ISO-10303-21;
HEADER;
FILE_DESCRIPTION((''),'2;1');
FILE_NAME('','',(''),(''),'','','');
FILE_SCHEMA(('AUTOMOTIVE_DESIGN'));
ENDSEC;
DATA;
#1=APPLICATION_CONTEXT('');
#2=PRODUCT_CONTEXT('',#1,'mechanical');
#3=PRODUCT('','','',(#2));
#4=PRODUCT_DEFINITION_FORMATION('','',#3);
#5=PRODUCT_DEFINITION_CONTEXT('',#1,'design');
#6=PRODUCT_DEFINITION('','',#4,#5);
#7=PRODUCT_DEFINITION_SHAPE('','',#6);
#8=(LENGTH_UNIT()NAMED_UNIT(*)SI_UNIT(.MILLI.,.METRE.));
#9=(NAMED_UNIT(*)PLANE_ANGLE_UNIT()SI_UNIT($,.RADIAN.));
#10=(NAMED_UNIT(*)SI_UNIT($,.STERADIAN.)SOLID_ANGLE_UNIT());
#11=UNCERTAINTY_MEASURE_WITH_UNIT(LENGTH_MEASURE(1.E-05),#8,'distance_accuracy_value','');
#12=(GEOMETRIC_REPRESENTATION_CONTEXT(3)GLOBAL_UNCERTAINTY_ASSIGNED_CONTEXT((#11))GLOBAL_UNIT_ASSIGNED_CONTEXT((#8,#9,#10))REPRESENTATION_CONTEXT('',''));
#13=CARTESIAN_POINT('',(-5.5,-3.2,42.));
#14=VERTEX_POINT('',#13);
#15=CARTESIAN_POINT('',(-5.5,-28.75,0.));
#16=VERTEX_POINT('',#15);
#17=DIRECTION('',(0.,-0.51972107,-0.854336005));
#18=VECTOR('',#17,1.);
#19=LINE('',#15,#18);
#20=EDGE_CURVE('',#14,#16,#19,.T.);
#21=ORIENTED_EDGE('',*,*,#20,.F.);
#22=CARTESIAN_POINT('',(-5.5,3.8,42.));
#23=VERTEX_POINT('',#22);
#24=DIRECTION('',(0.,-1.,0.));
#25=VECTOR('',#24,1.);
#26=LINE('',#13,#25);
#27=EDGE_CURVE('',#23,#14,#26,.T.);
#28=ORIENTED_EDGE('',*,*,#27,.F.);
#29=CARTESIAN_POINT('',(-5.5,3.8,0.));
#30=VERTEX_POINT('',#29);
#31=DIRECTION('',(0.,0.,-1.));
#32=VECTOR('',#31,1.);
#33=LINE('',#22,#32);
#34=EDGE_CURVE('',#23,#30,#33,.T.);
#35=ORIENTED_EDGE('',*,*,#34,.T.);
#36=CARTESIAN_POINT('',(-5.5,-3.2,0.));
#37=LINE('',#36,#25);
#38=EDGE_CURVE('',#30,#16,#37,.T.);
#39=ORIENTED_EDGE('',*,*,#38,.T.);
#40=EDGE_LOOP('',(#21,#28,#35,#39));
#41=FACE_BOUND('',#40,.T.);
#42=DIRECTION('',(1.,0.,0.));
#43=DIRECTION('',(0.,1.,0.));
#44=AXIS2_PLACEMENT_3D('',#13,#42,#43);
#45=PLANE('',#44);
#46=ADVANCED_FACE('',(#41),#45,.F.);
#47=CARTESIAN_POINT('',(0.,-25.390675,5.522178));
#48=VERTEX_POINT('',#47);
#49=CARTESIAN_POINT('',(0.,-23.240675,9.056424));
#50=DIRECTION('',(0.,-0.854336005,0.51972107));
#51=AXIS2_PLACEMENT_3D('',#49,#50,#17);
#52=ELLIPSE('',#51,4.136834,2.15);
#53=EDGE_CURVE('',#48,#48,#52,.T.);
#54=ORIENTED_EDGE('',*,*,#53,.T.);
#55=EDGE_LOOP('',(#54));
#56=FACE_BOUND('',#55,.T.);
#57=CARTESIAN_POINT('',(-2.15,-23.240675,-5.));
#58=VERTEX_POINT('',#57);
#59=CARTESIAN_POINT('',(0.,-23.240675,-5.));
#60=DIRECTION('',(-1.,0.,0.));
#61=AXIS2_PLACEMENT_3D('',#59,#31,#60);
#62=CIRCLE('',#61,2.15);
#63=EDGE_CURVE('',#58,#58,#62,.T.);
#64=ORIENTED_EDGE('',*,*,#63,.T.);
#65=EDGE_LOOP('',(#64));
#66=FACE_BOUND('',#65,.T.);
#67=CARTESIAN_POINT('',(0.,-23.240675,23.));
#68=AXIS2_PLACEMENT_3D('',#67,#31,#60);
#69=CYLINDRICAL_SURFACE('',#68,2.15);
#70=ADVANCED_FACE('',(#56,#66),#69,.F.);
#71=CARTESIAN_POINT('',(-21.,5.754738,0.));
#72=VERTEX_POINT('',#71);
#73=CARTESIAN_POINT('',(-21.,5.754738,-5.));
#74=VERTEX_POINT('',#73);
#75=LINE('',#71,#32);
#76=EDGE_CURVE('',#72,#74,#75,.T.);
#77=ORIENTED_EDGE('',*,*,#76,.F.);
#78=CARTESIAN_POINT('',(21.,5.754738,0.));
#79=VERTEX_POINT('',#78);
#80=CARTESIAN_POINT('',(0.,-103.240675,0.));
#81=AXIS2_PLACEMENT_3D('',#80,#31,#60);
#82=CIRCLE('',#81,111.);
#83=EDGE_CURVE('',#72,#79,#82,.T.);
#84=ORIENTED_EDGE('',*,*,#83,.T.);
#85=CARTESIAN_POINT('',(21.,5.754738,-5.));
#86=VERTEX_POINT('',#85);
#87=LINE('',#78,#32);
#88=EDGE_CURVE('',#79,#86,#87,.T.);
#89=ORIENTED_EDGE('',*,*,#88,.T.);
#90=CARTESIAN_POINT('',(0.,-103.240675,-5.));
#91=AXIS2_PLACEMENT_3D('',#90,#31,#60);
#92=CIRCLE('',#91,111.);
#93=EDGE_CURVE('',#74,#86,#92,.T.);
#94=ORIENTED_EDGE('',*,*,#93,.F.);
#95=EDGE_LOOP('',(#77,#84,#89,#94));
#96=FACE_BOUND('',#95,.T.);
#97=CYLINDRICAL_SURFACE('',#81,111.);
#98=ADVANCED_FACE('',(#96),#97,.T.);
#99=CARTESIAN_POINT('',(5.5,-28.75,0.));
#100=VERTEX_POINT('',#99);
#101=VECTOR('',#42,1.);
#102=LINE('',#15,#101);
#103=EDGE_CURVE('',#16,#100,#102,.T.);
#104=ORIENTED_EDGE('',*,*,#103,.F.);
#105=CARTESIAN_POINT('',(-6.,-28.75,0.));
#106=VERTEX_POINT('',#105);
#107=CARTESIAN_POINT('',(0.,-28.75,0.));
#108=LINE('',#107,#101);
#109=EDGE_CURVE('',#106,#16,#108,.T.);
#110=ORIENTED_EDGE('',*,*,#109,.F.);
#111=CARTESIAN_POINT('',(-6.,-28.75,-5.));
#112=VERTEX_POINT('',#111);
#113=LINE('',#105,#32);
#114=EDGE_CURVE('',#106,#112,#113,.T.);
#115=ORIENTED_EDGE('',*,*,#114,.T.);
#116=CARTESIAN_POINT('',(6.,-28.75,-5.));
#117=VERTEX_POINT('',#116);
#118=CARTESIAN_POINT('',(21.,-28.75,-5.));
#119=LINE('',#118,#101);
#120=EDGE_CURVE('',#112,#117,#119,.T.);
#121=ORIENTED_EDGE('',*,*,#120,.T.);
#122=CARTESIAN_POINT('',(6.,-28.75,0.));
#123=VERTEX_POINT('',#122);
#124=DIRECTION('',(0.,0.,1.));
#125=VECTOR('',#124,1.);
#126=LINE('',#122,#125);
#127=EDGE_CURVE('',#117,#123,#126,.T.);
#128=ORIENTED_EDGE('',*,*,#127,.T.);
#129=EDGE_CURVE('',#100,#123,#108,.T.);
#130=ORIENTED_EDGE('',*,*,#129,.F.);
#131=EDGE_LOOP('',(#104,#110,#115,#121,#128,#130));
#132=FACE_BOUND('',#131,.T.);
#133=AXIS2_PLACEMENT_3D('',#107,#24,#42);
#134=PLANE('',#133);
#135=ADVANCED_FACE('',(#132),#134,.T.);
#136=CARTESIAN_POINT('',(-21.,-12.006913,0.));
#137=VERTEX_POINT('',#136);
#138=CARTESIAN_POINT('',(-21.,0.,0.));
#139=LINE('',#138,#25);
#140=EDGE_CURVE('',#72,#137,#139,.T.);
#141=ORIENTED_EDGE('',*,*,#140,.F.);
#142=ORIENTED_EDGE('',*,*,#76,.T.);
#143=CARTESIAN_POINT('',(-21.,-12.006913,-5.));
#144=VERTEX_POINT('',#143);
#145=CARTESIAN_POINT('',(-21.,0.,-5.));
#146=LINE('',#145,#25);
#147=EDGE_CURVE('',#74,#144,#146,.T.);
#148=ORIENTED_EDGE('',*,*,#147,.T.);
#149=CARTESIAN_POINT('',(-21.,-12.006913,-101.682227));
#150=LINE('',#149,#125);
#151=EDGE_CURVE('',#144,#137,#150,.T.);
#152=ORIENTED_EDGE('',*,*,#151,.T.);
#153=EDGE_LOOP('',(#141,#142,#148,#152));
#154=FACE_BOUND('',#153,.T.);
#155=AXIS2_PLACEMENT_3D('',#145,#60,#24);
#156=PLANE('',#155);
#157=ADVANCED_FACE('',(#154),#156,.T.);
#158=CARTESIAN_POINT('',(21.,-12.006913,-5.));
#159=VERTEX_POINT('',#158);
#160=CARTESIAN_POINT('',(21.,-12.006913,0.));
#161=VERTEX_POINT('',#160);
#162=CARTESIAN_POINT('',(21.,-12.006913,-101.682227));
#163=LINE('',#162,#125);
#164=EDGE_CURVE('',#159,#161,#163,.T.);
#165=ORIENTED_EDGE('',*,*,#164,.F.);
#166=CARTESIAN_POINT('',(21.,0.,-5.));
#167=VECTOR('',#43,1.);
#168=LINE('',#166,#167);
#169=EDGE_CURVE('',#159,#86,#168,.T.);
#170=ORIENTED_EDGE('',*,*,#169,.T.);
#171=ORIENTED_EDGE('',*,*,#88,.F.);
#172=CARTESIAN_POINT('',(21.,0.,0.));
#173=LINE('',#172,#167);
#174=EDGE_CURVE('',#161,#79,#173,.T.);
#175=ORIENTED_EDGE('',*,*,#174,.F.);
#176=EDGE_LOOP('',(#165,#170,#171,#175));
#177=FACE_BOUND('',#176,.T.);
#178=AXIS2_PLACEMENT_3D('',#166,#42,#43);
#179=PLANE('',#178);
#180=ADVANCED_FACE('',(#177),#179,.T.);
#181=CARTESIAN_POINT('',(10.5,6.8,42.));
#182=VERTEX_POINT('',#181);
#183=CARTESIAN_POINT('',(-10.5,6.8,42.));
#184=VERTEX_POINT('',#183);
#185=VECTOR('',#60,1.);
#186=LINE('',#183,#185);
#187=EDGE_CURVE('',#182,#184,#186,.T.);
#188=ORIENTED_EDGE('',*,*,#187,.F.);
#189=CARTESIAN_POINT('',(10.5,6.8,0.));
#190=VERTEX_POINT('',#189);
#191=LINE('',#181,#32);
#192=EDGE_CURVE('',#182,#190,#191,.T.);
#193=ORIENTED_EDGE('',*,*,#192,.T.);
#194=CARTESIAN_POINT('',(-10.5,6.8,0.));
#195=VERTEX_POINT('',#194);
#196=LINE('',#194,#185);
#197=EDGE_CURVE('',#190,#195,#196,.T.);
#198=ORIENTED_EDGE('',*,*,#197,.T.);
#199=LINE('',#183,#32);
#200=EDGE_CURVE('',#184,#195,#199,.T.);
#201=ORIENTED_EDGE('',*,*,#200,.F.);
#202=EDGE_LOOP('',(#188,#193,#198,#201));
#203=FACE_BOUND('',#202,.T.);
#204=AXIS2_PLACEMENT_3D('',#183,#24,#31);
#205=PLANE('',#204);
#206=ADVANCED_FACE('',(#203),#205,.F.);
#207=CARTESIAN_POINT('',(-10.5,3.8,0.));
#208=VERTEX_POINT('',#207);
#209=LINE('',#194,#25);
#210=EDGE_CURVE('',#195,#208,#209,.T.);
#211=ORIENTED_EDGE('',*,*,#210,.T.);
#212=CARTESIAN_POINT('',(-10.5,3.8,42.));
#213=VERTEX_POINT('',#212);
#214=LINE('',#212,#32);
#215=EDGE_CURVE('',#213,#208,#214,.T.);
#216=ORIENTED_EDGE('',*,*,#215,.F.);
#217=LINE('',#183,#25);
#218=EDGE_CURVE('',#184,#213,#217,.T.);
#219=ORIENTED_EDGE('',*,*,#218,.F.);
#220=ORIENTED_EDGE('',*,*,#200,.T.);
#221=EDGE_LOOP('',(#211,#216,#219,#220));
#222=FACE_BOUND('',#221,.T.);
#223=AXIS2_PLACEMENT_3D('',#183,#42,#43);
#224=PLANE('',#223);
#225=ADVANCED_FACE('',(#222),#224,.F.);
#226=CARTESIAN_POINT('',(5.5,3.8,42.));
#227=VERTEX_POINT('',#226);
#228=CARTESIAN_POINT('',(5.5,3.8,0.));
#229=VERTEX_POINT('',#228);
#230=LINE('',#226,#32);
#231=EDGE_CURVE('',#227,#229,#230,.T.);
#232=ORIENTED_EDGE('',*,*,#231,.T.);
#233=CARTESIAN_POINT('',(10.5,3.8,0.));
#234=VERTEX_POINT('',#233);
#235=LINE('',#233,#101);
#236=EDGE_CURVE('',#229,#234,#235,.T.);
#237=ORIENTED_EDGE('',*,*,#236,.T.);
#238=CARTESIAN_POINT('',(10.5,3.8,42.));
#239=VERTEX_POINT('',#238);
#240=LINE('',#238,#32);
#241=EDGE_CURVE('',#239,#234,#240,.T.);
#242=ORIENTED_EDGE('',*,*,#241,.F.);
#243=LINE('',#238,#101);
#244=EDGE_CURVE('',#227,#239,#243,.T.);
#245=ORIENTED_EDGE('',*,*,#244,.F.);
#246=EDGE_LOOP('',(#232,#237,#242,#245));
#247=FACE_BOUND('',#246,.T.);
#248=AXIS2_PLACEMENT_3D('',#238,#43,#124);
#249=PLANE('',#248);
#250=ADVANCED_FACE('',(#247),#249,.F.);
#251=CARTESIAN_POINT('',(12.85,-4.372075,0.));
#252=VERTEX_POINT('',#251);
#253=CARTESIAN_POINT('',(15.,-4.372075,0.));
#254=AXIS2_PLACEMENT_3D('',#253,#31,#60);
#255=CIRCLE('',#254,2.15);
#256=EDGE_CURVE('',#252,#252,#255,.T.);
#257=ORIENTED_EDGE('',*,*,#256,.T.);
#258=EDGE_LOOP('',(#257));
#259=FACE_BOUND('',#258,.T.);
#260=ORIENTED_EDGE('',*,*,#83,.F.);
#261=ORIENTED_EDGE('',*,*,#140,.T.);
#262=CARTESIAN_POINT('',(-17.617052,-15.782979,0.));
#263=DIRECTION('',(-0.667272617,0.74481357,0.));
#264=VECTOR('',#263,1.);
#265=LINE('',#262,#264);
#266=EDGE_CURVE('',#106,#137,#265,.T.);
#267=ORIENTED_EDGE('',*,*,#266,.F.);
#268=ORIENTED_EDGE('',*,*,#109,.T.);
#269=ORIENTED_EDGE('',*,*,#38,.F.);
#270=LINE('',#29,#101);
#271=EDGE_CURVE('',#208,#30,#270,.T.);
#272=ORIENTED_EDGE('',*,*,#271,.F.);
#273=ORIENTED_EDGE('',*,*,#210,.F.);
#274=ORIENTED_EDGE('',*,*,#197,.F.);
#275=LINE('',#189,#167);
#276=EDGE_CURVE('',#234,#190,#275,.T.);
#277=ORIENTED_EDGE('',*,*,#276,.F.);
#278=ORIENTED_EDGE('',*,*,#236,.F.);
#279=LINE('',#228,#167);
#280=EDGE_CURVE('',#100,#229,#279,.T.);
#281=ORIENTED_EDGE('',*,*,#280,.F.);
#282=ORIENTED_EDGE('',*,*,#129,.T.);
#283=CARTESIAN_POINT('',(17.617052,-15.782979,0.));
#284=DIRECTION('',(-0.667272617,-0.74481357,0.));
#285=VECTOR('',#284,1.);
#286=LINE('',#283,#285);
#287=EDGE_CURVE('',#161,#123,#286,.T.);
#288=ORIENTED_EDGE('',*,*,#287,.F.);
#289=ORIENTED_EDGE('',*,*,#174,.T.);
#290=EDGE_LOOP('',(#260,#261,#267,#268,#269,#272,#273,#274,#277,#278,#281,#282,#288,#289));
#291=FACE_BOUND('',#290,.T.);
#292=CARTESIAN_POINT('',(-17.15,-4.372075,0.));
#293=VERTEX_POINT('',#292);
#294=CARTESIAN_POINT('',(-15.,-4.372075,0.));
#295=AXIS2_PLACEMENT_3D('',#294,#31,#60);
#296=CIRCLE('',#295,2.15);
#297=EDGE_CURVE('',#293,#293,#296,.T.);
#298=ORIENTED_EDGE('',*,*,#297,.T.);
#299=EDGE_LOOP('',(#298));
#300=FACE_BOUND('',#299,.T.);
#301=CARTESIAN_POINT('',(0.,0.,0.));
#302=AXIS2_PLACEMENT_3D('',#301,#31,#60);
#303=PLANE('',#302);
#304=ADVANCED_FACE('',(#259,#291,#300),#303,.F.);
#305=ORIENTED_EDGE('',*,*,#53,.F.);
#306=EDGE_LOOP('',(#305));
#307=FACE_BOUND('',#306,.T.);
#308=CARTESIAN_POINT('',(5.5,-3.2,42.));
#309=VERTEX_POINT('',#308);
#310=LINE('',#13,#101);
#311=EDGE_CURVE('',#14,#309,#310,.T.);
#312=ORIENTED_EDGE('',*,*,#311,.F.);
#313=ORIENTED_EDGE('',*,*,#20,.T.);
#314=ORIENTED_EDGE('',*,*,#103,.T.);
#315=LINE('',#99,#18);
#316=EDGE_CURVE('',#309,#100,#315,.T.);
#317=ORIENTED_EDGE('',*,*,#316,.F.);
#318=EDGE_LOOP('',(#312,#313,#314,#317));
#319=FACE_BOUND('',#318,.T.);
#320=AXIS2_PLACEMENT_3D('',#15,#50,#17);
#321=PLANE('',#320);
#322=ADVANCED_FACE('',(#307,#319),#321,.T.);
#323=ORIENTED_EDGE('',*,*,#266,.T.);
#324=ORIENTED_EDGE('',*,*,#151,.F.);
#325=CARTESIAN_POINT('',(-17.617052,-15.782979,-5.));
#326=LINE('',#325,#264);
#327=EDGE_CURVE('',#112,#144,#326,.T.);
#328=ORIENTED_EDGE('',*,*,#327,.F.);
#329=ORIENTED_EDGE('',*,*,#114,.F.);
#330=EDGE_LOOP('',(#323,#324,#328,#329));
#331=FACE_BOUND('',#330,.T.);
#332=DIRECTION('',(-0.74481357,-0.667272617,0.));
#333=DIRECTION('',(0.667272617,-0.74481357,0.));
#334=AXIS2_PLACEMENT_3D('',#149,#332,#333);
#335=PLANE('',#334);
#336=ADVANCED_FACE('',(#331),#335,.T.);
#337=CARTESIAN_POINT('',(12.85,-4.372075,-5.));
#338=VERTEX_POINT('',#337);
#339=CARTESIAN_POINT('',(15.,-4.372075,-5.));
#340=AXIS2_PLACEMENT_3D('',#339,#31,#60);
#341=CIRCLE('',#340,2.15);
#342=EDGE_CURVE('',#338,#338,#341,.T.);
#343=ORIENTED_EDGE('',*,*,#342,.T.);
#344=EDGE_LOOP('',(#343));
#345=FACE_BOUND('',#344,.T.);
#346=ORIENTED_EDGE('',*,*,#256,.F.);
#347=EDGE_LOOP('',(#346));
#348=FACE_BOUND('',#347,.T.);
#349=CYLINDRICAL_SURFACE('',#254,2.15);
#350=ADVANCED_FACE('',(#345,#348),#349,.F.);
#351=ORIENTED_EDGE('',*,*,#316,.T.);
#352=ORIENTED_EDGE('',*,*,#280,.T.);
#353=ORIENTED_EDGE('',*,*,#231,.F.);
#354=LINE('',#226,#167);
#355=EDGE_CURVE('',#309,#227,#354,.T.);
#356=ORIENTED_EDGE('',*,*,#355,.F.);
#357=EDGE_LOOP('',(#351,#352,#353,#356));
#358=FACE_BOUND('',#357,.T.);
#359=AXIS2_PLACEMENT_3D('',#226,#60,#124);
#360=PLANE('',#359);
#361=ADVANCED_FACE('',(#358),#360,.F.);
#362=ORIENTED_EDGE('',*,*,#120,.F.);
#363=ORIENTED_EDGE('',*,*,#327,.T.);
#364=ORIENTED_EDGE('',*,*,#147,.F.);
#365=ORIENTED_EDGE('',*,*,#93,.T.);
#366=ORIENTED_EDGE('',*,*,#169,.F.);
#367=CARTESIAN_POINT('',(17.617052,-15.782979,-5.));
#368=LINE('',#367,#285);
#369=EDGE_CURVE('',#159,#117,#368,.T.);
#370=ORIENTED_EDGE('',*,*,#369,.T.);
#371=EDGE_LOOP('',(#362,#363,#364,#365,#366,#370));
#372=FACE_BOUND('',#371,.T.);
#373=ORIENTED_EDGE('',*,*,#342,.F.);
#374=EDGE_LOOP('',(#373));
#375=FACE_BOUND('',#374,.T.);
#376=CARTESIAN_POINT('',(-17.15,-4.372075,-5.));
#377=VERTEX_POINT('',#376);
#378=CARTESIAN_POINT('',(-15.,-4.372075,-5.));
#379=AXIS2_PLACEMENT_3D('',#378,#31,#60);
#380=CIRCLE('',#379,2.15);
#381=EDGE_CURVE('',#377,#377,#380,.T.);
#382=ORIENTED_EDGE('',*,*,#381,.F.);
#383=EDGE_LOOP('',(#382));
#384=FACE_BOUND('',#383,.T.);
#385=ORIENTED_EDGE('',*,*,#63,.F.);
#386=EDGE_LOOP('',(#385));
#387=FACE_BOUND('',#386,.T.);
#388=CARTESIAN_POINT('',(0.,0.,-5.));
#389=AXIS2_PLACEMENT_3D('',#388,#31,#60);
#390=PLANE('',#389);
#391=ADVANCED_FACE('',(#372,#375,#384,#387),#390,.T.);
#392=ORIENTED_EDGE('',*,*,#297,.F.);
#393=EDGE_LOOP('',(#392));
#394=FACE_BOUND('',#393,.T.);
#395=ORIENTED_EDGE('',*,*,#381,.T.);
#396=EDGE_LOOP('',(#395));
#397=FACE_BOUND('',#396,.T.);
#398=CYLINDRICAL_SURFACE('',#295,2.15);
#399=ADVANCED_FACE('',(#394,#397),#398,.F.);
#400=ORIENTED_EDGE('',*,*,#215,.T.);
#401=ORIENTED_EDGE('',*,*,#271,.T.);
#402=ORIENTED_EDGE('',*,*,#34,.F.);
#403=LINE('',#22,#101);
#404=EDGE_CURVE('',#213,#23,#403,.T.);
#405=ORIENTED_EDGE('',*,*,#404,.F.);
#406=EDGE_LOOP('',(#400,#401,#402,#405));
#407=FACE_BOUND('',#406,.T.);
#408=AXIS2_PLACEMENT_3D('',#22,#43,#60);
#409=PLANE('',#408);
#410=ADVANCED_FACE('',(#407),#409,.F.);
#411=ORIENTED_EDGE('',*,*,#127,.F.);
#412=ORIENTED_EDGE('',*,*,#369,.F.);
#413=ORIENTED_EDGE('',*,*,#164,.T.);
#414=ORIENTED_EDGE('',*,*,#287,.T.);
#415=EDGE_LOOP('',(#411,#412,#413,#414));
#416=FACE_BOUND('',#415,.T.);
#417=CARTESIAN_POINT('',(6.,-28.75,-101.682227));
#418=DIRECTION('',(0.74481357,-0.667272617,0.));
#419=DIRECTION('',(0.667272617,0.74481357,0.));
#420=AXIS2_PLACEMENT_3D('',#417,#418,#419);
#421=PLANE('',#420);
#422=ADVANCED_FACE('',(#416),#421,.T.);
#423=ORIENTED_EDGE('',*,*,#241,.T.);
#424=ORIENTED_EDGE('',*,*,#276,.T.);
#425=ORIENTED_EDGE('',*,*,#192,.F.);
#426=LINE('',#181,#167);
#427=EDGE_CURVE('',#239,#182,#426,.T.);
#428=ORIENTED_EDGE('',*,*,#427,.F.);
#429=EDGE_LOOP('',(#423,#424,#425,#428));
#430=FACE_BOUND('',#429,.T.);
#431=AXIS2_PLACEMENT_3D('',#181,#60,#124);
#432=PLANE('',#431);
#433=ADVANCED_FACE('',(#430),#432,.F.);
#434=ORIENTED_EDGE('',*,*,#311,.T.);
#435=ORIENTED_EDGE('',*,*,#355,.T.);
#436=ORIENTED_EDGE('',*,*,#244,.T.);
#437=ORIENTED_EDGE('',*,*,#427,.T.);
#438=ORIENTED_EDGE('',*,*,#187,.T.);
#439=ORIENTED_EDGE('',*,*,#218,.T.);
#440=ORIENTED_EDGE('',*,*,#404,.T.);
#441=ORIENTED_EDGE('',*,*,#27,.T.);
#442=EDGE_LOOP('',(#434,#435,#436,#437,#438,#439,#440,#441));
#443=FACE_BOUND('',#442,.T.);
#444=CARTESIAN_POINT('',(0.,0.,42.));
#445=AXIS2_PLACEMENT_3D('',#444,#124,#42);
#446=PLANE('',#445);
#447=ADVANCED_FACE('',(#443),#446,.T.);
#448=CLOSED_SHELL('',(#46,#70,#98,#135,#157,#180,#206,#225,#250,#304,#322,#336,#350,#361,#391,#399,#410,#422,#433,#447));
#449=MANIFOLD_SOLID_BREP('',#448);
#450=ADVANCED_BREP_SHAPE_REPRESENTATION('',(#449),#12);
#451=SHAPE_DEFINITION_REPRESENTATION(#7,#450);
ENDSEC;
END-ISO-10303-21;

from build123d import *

# Parameters (mm, degrees)
BOSS_EXTRUDE1_DEPTH      = 42
BOSS_EXTRUDE3_DEPTH      = 5
SKETCH5_R                = 2.15
CUT_EXTRUDE4_DEPTH       = 5
BOSS_EXTRUDE4_DEPTH      = 8
BOSS_EXTRUDE4_DEPTH_BACK = 8
ENL_V_START              = -42
ESQUISSE2_W              = 18.319626144
ESQUISSE2_H              = 0.2
ENL_V_MAT_EXTRU_1_DEPTH  = 42
ESQUISSE4_W              = 42
ESQUISSE4_H              = 5
BOSS_EXTRU_2_DEPTH       = 15
ESQUISSE5_R              = 2.15
ENL_V_MAT_EXTRU_2_DEPTH  = 28
ENL_V_START_2            = -5
ENL_V_MAT_EXTRU_3_DEPTH  = 5
BOSS_EXTRU_3_DEPTH       = 5.8
BOSS_EXTRU_4_DEPTH       = 15
ESQUISSE14_W             = 44.082286315
ESQUISSE14_H             = 62.535336401
ENL_V_MAT_EXTRU_4_DEPTH  = 50
BOSS_EXTRU_5_DEPTH       = 42
BOSS_EXTRU_7_DEPTH       = 11
ESQUISSE20_R             = 2.15
ENL_V_MAT_EXTRU_7_DEPTH  = 42
BOSS_EXTRU_8_START       = -5
BOSS_EXTRU_8_DEPTH       = 5


# Read off the part's stored shape, not the designer's step: Enlèv. mat.-Extru.3
with BuildPart() as part:
    # Sketch1 → Boss-Extrude1 (new body)
    with BuildSketch(Plane.XY):
        Polygon((-8.8, 3), (-6.002154051, -3), (6.002154051, -3), (8.8, 3), align=None)
    extrude(amount=BOSS_EXTRUDE1_DEPTH)

    # Sketch2 → Boss-Extrude3 (add)
    with BuildSketch(Plane(origin=(0, 0, 0), x_dir=(-1, 0, 0), z_dir=(0, 0, -1))):
        with BuildLine():
            Line((21, 4.736174234), (21, -13.75))
            Line((21, -13.75), (-21, -13.75))
            Line((-21, -13.75), (-21, 4.736174234))
            ThreePointArc((-21, 4.736174234), (0, 6.759324864), (21, 4.736174234))
        make_face()
    extrude(amount=BOSS_EXTRUDE3_DEPTH)

    # Sketch5 → Cut-Extrude4 (cut)
    with BuildSketch(Plane(origin=(0, 0, -5), x_dir=(-1, 0, 0), z_dir=(0, 0, -1))):
        with Locations((-15, -4.37207547)):
            Circle(SKETCH5_R)
        with Locations((15, -4.37207547)):
            Circle(SKETCH5_R)
    extrude(amount=-CUT_EXTRUDE4_DEPTH, mode=Mode.SUBTRACT)

    # Sketch4 → Boss-Extrude4 (add, two sides: drawn at the far end of the back side and taken through both)
    with BuildSketch(Plane.ZY.offset(-BOSS_EXTRUDE4_DEPTH_BACK)):
        Polygon((42, -3), (0, -3), (0, -26), (15, -26), (15, -17.785714286), align=None)
    extrude(amount=BOSS_EXTRUDE4_DEPTH + BOSS_EXTRUDE4_DEPTH_BACK)

    # Esquisse2 → Enlèv. mat.-Extru.1 (cut)
    with BuildSketch(Plane.XY.offset(42).offset(ENL_V_START)):
        with Locations((-0.359813072, 2.9)):
            Rectangle(ESQUISSE2_W, ESQUISSE2_H)
    extrude(amount=ENL_V_MAT_EXTRU_1_DEPTH, mode=Mode.SUBTRACT)

    # Esquisse4 → Boss.-Extru.2 (add)
    with BuildSketch(Plane.XZ.offset(13.75)):
        with Locations((0, -2.5)):
            Rectangle(ESQUISSE4_W, ESQUISSE4_H)
    extrude(amount=BOSS_EXTRU_2_DEPTH)

    # Esquisse5 → Enlèv. mat.-Extru.2 (cut)
    with BuildSketch(Plane(origin=(0, 0, -5), x_dir=(-1, 0, 0), z_dir=(0, 0, -1))):
        with Locations((0, -23.240675136)):
            Circle(ESQUISSE5_R)
    extrude(amount=-ENL_V_MAT_EXTRU_2_DEPTH, mode=Mode.SUBTRACT)

    # Enlèv. mat.-Extru.3 outline → Enlèv. mat.-Extru.3 (cut)
    with BuildSketch(Plane(origin=(0, 0, -5), x_dir=(-1, 0, 0), z_dir=(0, 0, -1)).offset(ENL_V_START_2)):
        Polygon((21, -12.006912883), (6, -28.75), (21, -28.75), align=None)
        Polygon((-6, -28.75), (-21, -12.006912883), (-21, -28.75), align=None)
    extrude(amount=ENL_V_MAT_EXTRU_3_DEPTH, mode=Mode.SUBTRACT)

    # Esquisse7 → Boss.-Extru.3 (add)
    with BuildSketch(Plane(origin=(0, 2.8, 0), x_dir=(1, 0, 0), z_dir=(0, 1, 0))):
        with BuildLine():
            Line((2.5, -42), (0, -42))
            Line((0, -42), (-2.5, -42))
            Line((-2.5, -42), (-2.5, -42.178964355))
            ThreePointArc((-2.5, -42.178964355), (0, -47.633030278), (2.5, -42.178964355))
            Line((2.5, -42.178964355), (2.5, -42))
        make_face()
    extrude(amount=-BOSS_EXTRU_3_DEPTH)

    # Esquisse9 → Boss.-Extru.4 (add)
    with BuildSketch(Plane.XY):
        Polygon((8, -26), (8, -26.146615259), (6, -28.75), (-6, -28.75), (-8, -26.360097245), (-8, -26), align=None)
    extrude(amount=BOSS_EXTRU_4_DEPTH)

    # Esquisse14 → Enlèv. mat.-Extru.4 (cut)
    with BuildSketch(Plane.XY):
        with Locations((2.134773814, -3.901083115)):
            Rectangle(ESQUISSE14_W, ESQUISSE14_H)
    extrude(amount=ENL_V_MAT_EXTRU_4_DEPTH, mode=Mode.SUBTRACT)

    # Esquisse15 → Boss.-Extru.5 (add)
    with BuildSketch(Plane.XY):
        Polygon((-10.5, 6.8), (10.5, 6.8), (10.5, 3.8), (5.5, 3.8), (5.5, -3.2), (-5.5, -3.2), (-5.5, 3.8), (-10.5, 3.8), align=None)
    extrude(amount=BOSS_EXTRU_5_DEPTH)

    # Esquisse16 → Boss.-Extru.7 (add)
    with BuildSketch(Plane(origin=(5.5, 0, 0), x_dir=(0, 0, -1), z_dir=(1, 0, 0))):
        Polygon((0, -3.2), (0, -28.75), (-42, -3.2), align=None)
    extrude(amount=-BOSS_EXTRU_7_DEPTH)

    # Esquisse20 → Enlèv. mat.-Extru.7 (cut)
    with BuildSketch(Plane(origin=(0, 0, 0), x_dir=(-1, 0, 0), z_dir=(0, 0, -1))):
        with Locations((0, -23.240675136)):
            Circle(ESQUISSE20_R)
    extrude(amount=-ENL_V_MAT_EXTRU_7_DEPTH, mode=Mode.SUBTRACT)

    # Esquisse21 → Boss.-Extru.8 (add)
    with BuildSketch(Plane(origin=(0, 0, -5), x_dir=(-1, 0, 0), z_dir=(0, 0, -1)).offset(BOSS_EXTRU_8_START)):
        with BuildLine():
            Line((-21, 4.736174234), (-21, 5.754737611))
            ThreePointArc((-21, 5.754737611), (0, 7.759324864), (21, 5.754737611))
            Line((21, 5.754737611), (21, 4.736174234))
            ThreePointArc((21, 4.736174234), (0, 6.759324864), (-21, 4.736174234))
        make_face()
    extrude(amount=BOSS_EXTRU_8_DEPTH)


solid = part.part
